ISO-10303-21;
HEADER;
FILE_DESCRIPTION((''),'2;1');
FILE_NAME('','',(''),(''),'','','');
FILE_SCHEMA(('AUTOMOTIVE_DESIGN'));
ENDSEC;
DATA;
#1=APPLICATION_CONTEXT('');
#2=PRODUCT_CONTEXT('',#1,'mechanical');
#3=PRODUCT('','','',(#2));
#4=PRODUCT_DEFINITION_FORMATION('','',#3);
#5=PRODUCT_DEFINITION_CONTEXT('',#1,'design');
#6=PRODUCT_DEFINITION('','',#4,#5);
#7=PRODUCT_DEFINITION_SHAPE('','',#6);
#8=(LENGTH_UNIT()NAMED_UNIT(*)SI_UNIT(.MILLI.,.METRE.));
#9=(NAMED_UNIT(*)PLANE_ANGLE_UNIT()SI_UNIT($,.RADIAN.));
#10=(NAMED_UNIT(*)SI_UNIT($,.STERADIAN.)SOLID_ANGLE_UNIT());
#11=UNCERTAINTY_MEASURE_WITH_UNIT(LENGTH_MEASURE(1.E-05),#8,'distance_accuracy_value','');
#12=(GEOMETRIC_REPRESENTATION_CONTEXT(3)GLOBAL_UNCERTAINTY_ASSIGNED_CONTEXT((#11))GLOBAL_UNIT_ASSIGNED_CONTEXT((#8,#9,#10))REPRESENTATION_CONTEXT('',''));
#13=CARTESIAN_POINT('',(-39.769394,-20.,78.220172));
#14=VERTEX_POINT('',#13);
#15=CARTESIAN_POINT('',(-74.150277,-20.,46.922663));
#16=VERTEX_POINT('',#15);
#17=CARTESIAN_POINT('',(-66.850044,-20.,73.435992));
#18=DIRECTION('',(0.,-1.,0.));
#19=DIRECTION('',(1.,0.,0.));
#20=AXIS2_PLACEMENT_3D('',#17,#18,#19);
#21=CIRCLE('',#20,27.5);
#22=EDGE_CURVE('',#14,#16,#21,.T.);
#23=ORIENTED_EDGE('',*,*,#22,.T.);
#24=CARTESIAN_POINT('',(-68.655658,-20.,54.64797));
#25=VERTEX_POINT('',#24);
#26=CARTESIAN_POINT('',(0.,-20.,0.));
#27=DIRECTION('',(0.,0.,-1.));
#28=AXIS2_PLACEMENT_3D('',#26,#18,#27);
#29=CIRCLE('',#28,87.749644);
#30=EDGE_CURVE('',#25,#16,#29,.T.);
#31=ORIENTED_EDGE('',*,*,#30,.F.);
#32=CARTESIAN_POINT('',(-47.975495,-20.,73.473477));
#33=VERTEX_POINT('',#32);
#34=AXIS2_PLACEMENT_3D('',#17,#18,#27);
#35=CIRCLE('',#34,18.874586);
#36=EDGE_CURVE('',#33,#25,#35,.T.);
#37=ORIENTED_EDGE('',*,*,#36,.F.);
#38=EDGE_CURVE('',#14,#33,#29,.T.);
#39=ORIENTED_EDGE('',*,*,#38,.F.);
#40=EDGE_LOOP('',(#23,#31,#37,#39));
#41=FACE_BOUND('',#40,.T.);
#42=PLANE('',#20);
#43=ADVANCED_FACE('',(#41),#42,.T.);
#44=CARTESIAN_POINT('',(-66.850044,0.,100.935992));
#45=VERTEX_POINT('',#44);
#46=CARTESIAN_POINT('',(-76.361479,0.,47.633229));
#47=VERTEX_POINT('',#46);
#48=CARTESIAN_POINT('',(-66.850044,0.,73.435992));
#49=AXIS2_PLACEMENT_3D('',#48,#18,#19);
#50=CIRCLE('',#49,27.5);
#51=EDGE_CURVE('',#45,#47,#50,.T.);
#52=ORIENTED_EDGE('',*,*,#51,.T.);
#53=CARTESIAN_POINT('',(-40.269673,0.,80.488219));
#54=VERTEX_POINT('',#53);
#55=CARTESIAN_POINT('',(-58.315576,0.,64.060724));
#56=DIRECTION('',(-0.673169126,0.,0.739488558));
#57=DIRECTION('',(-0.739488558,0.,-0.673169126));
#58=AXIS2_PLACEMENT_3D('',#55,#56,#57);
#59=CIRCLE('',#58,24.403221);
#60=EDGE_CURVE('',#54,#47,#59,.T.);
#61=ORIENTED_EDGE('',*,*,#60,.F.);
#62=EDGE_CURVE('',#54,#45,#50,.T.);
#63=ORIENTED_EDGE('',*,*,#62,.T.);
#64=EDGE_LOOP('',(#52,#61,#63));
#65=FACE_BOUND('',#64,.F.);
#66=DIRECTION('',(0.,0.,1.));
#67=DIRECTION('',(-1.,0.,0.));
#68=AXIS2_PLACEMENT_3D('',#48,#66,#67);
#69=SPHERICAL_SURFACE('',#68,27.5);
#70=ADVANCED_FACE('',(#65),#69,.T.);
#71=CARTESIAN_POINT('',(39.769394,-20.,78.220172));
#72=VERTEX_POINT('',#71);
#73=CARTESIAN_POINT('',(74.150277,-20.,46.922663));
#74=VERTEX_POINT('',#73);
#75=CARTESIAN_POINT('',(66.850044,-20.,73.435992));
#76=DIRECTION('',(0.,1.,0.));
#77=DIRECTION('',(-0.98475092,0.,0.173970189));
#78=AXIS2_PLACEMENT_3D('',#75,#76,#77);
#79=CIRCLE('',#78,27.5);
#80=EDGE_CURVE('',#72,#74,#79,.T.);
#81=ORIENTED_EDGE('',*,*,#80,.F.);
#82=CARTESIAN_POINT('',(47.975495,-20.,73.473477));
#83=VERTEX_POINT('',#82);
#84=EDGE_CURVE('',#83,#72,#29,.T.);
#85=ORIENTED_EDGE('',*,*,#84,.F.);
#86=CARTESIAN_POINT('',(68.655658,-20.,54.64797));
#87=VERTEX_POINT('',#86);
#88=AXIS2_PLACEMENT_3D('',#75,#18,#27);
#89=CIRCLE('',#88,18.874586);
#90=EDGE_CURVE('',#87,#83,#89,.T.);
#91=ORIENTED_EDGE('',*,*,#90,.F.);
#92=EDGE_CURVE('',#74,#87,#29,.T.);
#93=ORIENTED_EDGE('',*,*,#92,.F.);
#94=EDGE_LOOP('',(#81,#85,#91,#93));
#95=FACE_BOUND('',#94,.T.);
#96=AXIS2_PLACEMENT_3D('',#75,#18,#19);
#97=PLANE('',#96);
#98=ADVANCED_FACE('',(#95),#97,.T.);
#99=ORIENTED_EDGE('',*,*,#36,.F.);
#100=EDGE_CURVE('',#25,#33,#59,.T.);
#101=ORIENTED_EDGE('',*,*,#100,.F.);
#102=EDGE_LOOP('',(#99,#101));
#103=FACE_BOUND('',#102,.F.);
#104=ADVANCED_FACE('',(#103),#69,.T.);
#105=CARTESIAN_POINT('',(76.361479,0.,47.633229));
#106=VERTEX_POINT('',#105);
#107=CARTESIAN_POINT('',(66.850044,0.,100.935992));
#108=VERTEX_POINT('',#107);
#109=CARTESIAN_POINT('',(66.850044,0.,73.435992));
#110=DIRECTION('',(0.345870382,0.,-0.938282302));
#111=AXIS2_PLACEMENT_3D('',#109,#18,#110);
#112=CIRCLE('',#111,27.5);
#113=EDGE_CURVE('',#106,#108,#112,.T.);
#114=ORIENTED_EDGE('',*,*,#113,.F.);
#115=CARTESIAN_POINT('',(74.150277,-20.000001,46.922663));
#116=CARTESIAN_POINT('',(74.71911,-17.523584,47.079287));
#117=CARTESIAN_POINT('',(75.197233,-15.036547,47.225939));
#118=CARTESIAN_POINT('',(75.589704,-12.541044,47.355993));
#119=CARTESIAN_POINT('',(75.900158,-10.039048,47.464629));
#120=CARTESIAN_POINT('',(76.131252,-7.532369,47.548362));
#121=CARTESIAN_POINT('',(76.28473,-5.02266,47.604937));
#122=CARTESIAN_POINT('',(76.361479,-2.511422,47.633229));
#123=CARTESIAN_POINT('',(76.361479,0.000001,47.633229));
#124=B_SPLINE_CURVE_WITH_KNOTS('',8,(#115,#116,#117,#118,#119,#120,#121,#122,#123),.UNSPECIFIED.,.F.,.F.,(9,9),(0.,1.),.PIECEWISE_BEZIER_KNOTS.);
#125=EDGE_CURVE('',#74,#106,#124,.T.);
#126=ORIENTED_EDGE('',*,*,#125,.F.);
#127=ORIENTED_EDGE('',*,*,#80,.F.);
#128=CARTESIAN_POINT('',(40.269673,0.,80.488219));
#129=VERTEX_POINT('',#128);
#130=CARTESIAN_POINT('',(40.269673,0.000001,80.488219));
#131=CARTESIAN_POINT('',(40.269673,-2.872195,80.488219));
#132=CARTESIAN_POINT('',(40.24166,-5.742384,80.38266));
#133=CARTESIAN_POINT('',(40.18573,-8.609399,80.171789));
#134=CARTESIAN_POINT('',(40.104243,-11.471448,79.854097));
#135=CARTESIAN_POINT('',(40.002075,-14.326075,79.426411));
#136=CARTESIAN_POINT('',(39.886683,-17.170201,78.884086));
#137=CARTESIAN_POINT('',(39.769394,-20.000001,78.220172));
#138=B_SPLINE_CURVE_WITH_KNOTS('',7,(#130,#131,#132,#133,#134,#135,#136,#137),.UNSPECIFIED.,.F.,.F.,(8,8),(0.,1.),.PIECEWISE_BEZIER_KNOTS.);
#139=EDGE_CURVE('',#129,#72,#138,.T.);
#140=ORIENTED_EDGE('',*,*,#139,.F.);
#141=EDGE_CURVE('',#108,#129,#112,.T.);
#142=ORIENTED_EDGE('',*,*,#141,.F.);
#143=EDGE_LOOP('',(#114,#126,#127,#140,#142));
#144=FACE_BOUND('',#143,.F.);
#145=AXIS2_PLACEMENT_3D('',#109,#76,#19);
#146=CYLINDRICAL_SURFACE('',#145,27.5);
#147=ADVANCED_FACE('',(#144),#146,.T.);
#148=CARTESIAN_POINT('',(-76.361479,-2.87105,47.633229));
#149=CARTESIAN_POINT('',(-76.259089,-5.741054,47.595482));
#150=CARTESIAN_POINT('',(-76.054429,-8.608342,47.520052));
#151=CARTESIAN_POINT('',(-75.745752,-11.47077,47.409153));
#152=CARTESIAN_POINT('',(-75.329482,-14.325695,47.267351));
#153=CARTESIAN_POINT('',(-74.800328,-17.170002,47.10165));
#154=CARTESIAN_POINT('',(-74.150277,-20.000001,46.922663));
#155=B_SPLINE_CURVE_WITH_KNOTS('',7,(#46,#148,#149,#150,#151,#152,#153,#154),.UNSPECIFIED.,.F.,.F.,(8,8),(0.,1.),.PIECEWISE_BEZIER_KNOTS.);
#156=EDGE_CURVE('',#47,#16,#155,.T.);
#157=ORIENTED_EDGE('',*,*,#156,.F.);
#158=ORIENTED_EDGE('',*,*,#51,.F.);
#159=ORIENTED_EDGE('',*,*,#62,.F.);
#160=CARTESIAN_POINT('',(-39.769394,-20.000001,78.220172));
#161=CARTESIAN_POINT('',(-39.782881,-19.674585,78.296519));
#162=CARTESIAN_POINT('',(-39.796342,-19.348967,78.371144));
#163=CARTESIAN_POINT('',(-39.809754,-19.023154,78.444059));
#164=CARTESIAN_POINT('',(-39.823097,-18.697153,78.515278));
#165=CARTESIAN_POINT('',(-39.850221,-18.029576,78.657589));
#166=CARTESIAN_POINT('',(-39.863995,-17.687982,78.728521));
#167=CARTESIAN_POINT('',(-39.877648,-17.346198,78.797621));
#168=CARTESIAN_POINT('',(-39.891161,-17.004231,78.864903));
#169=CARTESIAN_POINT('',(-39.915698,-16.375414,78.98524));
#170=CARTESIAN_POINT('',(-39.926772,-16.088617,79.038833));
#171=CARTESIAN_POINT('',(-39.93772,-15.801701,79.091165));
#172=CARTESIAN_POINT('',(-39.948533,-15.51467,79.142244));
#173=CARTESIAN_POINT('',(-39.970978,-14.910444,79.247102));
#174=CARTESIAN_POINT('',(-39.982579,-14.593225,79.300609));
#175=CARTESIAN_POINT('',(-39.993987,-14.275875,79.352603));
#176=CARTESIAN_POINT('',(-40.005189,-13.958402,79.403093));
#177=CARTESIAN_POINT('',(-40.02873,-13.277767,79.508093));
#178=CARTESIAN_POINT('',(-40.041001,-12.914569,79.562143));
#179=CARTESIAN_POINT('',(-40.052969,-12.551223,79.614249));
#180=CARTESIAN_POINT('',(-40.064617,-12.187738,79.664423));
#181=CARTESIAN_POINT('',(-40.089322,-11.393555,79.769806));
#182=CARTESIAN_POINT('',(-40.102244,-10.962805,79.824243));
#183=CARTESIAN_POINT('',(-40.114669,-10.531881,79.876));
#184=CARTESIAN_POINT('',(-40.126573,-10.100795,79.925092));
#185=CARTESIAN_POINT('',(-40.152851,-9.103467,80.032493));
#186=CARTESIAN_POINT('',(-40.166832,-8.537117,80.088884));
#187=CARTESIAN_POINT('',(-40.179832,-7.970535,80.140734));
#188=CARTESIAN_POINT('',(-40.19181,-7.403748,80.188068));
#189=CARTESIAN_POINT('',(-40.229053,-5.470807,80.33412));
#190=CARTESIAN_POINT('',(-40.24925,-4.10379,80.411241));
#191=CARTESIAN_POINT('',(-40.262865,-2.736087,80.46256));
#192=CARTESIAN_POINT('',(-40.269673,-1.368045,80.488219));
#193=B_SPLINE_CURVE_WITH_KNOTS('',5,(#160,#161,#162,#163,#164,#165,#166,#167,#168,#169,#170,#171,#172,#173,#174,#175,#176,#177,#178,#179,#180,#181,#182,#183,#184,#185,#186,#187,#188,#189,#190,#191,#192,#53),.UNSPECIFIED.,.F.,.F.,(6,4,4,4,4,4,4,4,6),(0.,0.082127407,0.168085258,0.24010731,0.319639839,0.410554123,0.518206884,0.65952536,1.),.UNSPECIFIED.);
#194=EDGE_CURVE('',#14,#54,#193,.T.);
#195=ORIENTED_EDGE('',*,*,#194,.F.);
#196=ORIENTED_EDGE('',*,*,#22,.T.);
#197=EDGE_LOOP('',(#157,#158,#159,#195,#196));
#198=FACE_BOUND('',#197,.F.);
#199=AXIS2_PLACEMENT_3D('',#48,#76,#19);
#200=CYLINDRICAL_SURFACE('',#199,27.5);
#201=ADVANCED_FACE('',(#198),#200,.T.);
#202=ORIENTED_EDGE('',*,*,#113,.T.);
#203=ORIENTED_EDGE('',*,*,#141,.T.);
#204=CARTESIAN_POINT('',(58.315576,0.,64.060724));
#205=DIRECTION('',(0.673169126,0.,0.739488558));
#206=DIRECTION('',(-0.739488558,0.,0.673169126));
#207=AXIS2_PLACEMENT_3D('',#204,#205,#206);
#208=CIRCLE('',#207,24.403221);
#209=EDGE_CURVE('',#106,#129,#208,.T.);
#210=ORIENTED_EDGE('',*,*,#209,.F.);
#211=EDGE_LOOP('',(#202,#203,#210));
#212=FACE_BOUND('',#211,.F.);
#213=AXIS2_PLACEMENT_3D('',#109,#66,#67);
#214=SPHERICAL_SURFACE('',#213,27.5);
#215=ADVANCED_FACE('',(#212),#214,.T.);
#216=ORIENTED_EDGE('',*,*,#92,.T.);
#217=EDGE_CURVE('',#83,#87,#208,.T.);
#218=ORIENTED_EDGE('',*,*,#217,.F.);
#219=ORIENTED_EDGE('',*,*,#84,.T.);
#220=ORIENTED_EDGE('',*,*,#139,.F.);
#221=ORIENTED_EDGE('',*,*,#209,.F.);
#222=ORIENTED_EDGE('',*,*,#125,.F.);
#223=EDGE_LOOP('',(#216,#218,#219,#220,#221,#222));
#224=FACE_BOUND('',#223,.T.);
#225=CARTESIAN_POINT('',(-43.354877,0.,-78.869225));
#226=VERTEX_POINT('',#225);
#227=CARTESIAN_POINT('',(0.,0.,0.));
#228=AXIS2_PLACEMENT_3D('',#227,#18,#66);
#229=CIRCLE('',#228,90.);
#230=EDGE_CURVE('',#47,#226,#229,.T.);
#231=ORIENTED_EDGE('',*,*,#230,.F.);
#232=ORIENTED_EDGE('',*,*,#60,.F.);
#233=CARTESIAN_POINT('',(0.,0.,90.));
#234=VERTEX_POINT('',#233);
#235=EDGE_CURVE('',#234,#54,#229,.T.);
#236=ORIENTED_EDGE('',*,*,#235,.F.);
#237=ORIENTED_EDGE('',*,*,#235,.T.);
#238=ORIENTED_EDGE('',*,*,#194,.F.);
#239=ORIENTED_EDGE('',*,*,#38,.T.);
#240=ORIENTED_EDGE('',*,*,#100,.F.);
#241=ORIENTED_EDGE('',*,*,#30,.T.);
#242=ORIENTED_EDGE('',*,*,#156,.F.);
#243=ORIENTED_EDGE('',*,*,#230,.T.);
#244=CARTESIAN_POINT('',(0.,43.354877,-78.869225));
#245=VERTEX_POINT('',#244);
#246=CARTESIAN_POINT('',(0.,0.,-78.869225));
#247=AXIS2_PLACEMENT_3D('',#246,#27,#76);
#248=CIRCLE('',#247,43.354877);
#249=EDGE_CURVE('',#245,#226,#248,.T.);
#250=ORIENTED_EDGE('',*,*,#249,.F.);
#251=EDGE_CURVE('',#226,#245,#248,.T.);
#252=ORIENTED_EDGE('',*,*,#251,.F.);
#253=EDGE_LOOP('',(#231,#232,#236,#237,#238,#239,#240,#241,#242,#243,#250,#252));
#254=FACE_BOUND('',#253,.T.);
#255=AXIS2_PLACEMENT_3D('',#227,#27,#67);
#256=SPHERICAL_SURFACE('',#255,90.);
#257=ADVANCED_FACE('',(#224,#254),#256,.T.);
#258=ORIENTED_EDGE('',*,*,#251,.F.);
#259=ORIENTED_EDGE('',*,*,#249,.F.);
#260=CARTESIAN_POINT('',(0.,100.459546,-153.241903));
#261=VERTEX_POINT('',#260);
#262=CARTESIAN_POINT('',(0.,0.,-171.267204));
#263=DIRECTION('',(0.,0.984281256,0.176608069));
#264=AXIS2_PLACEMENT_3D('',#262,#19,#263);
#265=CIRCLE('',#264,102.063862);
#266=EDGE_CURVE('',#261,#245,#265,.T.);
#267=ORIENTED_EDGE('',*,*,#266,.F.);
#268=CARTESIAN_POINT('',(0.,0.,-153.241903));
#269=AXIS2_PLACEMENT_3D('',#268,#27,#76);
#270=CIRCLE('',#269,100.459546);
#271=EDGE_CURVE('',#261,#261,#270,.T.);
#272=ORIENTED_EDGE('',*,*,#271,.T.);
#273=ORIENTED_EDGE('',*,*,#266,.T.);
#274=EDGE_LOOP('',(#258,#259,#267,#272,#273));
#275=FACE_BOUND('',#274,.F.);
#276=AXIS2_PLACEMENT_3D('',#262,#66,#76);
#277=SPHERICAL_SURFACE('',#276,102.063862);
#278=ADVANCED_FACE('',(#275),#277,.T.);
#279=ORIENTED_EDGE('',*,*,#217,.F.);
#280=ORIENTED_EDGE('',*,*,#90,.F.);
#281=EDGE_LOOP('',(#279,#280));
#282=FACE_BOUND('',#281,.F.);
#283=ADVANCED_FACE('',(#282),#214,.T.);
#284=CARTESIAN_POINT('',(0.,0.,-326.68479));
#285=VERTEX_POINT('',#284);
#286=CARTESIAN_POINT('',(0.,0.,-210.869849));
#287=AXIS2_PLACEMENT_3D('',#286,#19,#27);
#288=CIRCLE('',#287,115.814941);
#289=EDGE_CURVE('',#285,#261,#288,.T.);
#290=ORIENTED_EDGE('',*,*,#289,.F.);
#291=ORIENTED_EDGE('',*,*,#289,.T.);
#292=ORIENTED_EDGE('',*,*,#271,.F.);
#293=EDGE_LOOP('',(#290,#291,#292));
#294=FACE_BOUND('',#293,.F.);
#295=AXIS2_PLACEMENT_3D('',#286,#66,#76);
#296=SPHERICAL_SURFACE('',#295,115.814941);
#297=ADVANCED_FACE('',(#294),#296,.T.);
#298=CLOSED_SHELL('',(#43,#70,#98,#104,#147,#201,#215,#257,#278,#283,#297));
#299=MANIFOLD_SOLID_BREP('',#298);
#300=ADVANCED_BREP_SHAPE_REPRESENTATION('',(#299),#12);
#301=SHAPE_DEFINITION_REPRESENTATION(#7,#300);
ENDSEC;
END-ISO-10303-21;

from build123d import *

# Parameters (mm, degrees)
F2_R     = 27.5
F3_DEPTH = 20


# Not quite as in the source:
# - a feature names something its author has since deleted; it is built from what else it names


with BuildPart() as f1:
    # F0 (on Front) → F1 (revolve)
    with BuildSketch(Plane.XZ):
        with BuildLine():
            Line((0, -90), (0, 90))
            ThreePointArc((0, 90), (-90, 0), (0, -90))
        make_face()
    revolve(axis=Axis((0, 0, 3.2690457241), (0, 0, -1)))

    # F2 (on Front) → F3 (join)
    with BuildSketch(Plane.XZ):
        with Locations((-66.8500438333, 73.4359920025)):
            Circle(F2_R)
        with Locations((66.8500438333, 73.4359920025)):
            Circle(F2_R)
    extrude(amount=F3_DEPTH)

    # F4 (on face) → F5 (revolve)
    with BuildSketch(Plane(origin=(0, 0, 0), x_dir=(-1, 0, 0), z_dir=(0, 1, 0))):
        with BuildLine():
            Line((66.8500438333, 100.9359920025), (66.8500438333, 45.9359920025))
            ThreePointArc((66.8500438333, 45.9359920025), (94.3500438333, 73.4359920025), (66.8500438333, 100.9359920025))
        make_face()
    revolve(axis=Axis((-66.8500438333, 0, 71.019994095), (0, 0, -1)))

    # F6 (on face) → F7 (revolve)
    with BuildSketch(Plane(origin=(0, 0, 0), x_dir=(-1, 0, 0), z_dir=(0, 1, 0))):
        with BuildLine():
            Line((-66.8500438333, 100.9359920025), (-66.8500438333, 45.9359920025))
            ThreePointArc((-66.8500438333, 45.9359920025), (-39.3500438333, 73.4359920025), (-66.8500438333, 100.9359920025))
        make_face()
    revolve(axis=Axis((66.8500438333, 0, 79.5244728215), (0, 0, -1)))

    # F8 (on Right) → F9 (revolve)
    with BuildSketch(Plane.YZ):
        with BuildLine():
            ThreePointArc((0, -326.6847895979), (100.2179567321, -268.9169130562), (100.4595458508, -153.2419025898))
            ThreePointArc((100.4595458508, -153.2419025898), (65.487785005, -92.9832219274), (0, -69.2033424707))
            Line((0, -69.2033424707), (0, -326.6847895979))
        make_face()
    revolve(axis=Axis((0, 0, -34.6016712354), (0, 0, -1)))


solid = f1.part
